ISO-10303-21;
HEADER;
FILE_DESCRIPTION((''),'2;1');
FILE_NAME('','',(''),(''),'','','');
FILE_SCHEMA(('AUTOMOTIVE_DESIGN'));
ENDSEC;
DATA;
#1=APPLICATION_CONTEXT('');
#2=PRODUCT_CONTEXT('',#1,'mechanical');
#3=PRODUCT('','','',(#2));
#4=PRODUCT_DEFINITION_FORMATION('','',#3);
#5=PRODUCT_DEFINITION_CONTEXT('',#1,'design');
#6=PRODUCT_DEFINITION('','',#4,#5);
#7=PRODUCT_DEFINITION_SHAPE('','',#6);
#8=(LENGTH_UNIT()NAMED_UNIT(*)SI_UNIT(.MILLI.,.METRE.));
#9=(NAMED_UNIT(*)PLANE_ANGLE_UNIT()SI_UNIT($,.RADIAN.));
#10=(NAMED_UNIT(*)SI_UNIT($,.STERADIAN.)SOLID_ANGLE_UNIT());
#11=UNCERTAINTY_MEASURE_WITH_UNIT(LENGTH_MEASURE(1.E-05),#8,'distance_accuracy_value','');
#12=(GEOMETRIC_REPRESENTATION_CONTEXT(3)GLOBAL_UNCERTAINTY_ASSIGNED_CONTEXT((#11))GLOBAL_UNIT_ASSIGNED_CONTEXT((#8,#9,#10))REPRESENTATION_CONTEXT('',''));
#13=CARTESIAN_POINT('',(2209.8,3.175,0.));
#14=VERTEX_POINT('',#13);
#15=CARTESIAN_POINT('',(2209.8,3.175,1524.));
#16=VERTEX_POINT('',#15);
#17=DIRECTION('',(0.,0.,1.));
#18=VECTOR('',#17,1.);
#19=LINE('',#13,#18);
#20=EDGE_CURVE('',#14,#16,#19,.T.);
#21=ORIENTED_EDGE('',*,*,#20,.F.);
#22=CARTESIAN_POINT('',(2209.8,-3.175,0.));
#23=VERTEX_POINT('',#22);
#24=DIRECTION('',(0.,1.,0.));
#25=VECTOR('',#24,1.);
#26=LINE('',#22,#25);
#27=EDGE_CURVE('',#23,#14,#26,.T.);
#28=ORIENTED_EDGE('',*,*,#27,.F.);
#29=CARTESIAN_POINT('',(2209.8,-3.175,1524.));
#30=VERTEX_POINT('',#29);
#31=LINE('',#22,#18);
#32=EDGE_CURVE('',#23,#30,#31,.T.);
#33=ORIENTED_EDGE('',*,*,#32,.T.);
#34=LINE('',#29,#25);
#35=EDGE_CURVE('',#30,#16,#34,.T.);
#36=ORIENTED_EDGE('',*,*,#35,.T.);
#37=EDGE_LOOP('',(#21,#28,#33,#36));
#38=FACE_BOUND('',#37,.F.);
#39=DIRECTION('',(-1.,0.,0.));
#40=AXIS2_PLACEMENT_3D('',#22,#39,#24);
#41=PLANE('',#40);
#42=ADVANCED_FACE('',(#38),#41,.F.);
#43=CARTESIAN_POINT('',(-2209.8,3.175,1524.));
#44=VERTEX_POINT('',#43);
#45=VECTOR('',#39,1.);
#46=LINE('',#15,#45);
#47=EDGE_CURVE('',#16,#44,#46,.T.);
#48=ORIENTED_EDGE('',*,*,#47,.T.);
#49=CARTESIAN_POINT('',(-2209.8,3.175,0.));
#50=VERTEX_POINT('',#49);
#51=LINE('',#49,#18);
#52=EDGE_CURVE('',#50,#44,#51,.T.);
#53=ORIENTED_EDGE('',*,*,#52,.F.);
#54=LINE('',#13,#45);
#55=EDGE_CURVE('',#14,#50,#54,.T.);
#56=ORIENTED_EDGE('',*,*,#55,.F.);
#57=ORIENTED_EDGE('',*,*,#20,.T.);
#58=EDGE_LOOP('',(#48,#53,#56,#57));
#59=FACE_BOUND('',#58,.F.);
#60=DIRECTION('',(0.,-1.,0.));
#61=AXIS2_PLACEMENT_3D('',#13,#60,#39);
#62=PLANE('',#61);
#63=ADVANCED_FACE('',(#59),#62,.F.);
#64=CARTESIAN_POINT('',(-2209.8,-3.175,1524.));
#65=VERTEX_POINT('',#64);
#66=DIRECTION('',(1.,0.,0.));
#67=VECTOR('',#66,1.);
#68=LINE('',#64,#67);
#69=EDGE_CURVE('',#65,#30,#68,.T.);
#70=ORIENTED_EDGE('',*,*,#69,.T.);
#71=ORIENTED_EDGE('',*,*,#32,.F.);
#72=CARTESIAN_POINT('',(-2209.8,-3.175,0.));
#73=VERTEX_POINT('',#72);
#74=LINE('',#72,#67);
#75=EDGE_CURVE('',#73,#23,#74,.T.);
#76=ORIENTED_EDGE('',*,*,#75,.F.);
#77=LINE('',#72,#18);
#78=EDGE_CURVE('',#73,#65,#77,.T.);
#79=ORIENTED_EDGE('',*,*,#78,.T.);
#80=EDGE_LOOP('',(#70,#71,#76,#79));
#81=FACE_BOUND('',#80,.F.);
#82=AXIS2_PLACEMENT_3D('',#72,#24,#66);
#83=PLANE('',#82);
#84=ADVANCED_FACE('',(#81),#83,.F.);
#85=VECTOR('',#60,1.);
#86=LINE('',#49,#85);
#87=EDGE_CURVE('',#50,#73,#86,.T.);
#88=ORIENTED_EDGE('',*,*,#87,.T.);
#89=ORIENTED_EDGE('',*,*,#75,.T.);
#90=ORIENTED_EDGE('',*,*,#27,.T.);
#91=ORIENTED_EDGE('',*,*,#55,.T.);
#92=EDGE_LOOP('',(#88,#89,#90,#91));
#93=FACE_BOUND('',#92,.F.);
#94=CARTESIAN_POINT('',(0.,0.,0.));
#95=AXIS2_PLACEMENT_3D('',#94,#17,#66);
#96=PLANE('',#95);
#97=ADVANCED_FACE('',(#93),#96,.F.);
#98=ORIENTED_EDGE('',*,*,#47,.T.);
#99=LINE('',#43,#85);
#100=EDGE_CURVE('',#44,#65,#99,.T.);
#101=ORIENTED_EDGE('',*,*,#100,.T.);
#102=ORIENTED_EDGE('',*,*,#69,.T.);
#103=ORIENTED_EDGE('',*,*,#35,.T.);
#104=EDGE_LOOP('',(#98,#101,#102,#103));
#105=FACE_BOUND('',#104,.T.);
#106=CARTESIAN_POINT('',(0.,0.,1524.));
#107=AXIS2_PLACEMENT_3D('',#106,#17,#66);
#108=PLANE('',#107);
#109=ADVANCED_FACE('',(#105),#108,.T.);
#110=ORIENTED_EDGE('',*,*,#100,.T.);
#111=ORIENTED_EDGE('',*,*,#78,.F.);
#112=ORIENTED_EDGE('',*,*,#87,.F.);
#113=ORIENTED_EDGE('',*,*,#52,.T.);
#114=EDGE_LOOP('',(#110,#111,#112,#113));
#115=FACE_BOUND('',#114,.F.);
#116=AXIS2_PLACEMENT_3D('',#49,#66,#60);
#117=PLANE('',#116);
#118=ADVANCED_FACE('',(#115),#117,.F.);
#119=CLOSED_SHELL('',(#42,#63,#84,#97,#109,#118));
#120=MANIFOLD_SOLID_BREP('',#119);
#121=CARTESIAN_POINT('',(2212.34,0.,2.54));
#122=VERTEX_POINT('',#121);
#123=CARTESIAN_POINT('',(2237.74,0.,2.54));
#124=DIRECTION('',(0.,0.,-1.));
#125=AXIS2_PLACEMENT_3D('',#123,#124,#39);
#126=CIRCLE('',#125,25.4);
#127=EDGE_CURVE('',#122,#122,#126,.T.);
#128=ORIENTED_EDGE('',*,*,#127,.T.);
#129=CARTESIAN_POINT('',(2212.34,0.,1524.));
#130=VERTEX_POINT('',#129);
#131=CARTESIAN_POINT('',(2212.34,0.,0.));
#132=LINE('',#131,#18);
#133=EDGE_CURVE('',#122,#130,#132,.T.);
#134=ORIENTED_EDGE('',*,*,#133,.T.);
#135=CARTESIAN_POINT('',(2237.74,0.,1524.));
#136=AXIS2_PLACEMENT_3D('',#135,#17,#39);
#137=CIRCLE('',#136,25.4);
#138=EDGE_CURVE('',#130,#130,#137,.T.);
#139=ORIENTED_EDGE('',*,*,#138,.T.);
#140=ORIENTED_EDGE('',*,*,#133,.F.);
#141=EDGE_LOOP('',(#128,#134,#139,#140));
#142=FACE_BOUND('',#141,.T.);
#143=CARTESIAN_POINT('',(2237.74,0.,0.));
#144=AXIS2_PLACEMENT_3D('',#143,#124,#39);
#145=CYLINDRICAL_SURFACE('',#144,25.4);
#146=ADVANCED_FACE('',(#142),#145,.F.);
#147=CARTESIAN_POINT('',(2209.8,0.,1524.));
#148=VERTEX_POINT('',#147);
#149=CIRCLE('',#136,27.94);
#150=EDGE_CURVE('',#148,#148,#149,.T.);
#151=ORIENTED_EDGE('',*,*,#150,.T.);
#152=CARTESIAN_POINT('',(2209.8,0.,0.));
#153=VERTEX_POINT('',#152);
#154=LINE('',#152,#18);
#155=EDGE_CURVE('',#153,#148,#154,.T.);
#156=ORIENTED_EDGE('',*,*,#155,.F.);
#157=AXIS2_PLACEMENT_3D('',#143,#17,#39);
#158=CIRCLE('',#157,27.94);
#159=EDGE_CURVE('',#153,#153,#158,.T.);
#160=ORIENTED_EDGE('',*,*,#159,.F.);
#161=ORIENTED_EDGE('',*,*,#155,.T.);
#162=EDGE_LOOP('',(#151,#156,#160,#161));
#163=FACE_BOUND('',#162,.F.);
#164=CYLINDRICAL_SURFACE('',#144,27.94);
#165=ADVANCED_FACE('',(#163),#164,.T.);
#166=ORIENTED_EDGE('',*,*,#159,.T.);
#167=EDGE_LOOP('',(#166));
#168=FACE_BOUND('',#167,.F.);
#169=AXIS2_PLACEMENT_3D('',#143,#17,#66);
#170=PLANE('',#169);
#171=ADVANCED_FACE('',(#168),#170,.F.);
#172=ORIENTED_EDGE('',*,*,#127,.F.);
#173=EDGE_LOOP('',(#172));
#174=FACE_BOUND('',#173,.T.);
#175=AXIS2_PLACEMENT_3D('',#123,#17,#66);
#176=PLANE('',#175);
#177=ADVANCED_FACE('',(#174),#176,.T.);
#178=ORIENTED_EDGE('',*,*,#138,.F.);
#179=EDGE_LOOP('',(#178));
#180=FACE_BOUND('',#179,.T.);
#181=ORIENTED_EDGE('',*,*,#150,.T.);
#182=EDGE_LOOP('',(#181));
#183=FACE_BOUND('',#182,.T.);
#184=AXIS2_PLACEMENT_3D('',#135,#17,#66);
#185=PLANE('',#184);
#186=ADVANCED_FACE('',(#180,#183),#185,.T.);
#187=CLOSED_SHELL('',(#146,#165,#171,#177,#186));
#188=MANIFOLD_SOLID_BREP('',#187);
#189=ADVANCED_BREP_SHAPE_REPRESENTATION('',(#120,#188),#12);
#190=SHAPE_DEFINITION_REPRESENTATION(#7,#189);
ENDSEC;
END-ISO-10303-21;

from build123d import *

# Parameters (mm, degrees)
F1_DEPTH = 1524
F2_T     = -2.54


with BuildPart() as f1:
    # F0 (on Top) → F1 (new body)
    with BuildSketch(Plane.XY):
        with BuildLine():
            ThreePointArc((2265.68, 0), (2237.74, 27.94), (2209.8, 0))
            ThreePointArc((2209.8, 0), (2237.74, -27.94), (2265.68, 0))
        make_face()
    extrude(amount=F1_DEPTH)

    # F2
    f2_openings = [f1.faces().sort_by_distance(p)[0] for p in [
        (2237.74, 0, 1524),
    ]]
    offset(amount=F2_T, openings=f2_openings)


with BuildPart() as f1b:
    # F0 (on Top) → F1, piece 2 (new body)
    with BuildSketch(Plane.XY):
        Polygon((2209.8, 0), (2209.8, 3.175), (-2209.8, 3.175), (-2209.8, -3.175), (2209.8, -3.175), align=None)
    extrude(amount=F1_DEPTH)


solid = Compound([f1.part, f1b.part])
